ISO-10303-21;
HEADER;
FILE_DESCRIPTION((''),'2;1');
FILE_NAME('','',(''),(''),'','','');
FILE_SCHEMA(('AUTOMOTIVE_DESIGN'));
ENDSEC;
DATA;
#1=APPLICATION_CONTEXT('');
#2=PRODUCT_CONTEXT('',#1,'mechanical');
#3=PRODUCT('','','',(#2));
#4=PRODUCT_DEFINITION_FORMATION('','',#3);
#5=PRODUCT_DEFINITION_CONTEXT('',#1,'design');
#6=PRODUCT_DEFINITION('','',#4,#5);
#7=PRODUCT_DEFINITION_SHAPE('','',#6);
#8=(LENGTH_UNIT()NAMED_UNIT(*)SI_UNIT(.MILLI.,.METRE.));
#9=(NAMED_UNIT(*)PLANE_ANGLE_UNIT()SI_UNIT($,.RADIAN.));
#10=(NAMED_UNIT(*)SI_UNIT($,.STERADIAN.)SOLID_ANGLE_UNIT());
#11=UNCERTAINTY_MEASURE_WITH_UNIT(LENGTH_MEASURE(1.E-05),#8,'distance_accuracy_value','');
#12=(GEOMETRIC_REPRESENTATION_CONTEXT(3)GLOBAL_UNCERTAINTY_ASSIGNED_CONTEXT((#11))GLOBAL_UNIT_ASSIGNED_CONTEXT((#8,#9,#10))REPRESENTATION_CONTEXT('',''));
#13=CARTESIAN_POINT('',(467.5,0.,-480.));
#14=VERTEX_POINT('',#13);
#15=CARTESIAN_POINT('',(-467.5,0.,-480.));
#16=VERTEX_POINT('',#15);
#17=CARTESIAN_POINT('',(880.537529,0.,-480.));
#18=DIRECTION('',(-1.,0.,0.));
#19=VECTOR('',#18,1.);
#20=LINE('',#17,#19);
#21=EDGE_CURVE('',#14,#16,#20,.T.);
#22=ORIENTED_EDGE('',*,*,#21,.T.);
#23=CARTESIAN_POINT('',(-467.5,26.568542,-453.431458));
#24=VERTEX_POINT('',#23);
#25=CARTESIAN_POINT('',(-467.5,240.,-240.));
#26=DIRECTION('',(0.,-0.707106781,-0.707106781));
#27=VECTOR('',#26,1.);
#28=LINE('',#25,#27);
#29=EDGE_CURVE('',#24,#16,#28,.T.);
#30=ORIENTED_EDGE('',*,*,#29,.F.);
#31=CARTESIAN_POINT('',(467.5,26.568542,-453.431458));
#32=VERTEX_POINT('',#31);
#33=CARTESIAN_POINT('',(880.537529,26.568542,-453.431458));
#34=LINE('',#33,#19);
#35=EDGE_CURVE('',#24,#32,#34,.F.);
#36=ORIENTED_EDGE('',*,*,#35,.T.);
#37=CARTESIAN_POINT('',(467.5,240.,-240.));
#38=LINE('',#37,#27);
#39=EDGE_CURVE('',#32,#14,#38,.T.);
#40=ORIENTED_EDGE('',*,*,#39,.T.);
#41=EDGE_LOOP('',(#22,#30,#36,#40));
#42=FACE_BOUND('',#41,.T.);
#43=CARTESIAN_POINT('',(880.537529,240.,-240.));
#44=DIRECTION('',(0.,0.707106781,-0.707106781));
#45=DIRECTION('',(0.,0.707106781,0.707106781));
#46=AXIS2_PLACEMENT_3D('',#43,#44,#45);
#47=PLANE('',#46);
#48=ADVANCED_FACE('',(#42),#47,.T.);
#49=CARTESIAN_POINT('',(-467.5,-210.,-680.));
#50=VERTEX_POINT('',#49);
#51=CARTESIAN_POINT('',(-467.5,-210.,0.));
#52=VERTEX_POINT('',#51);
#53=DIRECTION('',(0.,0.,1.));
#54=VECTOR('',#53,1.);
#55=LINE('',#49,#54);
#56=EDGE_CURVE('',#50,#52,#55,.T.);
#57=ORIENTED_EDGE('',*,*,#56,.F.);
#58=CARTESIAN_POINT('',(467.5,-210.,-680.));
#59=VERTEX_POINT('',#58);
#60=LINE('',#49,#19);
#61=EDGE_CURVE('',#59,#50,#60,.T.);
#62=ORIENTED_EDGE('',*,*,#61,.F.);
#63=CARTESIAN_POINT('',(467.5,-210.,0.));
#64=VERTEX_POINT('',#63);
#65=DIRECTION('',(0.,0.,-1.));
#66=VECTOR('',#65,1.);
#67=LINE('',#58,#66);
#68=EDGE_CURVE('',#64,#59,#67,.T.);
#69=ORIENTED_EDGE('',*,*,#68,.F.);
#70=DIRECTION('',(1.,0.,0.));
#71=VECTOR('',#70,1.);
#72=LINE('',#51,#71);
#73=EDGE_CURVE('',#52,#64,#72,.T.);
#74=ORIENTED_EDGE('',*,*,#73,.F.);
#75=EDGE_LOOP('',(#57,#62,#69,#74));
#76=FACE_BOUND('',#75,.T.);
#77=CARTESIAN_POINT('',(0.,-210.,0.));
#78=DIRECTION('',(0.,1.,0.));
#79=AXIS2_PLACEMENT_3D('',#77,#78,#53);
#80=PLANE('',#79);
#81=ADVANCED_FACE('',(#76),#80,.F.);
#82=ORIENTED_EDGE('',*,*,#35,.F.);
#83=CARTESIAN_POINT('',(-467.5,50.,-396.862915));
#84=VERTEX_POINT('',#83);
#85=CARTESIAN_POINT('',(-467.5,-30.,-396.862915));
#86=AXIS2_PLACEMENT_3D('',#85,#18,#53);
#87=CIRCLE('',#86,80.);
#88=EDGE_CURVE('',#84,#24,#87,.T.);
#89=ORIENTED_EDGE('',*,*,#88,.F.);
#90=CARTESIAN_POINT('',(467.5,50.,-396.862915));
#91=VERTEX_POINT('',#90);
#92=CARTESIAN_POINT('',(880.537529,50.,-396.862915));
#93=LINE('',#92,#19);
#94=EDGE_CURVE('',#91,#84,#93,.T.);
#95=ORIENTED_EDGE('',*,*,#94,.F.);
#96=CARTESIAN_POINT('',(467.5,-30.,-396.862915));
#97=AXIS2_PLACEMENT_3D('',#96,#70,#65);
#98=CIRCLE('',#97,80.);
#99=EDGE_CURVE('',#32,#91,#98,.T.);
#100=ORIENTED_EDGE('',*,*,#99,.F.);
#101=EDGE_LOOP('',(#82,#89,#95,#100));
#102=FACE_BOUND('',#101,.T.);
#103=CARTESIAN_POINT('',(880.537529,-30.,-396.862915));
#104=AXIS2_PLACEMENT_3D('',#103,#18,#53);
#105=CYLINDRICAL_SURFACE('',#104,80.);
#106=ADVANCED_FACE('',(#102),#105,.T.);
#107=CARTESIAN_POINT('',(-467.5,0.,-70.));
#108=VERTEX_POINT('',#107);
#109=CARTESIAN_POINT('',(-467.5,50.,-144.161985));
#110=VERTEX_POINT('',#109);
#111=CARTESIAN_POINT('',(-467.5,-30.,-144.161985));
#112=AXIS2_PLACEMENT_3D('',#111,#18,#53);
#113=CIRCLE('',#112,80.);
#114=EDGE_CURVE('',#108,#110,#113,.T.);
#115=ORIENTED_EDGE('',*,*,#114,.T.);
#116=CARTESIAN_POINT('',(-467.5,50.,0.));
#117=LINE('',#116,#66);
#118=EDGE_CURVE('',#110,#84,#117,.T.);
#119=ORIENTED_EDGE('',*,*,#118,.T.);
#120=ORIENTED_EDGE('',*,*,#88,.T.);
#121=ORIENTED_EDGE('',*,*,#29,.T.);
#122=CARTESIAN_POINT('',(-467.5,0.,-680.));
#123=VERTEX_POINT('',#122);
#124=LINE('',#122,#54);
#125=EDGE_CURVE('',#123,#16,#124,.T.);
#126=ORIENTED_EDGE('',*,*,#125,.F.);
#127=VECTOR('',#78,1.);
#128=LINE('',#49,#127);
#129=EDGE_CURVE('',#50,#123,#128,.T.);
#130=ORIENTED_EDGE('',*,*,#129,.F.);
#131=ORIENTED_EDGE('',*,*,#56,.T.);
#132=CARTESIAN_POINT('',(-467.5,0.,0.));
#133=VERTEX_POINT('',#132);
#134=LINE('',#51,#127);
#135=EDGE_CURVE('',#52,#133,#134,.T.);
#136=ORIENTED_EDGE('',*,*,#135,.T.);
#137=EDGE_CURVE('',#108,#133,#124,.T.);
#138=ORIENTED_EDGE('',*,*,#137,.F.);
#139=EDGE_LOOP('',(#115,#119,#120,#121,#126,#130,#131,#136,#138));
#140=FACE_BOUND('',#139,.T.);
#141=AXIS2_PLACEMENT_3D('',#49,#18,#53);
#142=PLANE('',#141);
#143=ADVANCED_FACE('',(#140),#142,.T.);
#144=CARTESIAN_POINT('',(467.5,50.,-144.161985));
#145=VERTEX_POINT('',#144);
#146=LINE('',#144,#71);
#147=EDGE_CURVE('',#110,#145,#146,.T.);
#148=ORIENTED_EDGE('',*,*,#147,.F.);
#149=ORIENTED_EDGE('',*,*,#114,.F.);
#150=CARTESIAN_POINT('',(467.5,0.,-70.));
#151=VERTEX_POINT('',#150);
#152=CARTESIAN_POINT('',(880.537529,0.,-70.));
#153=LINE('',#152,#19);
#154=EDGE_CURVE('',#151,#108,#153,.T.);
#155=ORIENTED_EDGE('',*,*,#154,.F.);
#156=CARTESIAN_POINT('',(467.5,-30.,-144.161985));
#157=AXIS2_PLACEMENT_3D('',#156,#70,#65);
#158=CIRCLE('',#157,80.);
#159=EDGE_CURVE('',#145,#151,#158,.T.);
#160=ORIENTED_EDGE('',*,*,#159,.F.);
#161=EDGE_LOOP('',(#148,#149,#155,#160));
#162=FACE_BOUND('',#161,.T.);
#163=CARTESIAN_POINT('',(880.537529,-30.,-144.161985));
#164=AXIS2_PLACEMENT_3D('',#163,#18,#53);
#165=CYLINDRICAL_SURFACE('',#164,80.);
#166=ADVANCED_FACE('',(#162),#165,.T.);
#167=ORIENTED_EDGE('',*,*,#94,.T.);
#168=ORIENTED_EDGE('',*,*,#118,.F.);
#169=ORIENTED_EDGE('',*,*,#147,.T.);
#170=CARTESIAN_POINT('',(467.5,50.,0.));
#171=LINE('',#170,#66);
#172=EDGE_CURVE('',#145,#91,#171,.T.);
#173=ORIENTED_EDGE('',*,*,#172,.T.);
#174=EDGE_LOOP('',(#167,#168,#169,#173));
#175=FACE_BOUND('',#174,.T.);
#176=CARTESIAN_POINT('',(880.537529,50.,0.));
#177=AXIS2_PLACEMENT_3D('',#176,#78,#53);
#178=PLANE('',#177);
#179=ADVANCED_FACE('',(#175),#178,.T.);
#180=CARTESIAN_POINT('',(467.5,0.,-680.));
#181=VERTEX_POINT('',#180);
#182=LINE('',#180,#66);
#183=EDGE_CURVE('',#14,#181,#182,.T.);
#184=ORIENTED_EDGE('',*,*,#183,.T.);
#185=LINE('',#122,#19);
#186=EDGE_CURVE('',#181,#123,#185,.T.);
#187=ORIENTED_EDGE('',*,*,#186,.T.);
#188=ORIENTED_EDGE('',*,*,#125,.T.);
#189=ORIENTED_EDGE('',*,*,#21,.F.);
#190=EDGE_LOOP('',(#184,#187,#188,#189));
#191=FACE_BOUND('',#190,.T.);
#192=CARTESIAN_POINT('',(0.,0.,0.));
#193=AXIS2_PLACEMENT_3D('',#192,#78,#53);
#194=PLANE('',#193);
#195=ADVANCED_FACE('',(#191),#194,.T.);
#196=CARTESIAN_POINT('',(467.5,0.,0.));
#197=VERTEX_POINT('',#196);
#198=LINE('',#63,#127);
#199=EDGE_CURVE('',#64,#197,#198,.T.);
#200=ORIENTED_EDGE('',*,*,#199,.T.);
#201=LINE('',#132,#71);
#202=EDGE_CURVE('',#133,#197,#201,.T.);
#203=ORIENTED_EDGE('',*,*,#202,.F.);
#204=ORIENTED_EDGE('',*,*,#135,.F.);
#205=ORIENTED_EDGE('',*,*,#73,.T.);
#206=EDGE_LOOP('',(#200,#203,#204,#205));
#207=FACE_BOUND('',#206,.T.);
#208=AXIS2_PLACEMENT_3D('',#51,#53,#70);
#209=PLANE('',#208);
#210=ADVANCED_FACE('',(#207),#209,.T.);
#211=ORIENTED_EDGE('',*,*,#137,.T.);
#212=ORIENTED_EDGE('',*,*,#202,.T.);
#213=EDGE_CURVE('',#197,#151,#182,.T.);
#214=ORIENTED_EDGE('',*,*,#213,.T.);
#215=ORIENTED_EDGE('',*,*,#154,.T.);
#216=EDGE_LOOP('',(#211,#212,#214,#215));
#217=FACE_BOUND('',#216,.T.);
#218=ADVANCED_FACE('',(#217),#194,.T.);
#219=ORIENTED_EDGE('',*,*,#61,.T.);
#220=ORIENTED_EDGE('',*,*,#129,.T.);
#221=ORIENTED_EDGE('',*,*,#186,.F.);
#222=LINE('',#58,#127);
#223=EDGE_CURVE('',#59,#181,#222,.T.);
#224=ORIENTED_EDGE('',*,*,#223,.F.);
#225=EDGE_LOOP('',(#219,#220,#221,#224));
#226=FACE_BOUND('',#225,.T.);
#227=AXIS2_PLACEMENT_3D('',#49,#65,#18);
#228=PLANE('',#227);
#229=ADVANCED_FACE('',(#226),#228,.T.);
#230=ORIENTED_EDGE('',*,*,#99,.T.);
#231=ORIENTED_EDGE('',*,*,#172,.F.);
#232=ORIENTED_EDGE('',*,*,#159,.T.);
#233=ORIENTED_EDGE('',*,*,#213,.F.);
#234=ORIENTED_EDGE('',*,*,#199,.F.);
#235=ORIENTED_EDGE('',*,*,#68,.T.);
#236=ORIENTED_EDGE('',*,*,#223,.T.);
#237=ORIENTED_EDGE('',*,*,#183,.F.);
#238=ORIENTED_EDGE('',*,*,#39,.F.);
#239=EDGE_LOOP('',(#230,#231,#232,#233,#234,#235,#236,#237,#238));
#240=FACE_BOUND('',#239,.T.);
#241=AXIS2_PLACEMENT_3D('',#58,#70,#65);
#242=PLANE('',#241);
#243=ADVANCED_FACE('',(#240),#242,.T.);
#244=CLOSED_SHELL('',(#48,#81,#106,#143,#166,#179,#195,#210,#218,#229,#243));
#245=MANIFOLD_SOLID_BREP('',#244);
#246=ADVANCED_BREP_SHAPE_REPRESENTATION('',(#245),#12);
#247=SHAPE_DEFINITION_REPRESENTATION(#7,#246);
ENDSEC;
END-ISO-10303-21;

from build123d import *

# Parameters (mm, degrees)
SKETCH1_W           = 935
SKETCH1_H           = 680
BOSS_EXTRUDE1_DEPTH = 210
BOSS_EXTRUDE2_DEPTH = 935
FILLET1_R           = 80


with BuildPart() as part:
    # Sketch1 → Boss-Extrude1 (new body)
    with BuildSketch(Plane(origin=(0, 0, 0), x_dir=(1, 0, 0), z_dir=(0, 1, 0))):
        with Locations((0, 340)):
            Rectangle(SKETCH1_W, SKETCH1_H)
    extrude(amount=-BOSS_EXTRUDE1_DEPTH)

    # Sketch3 → Boss-Extrude2 (add)
    with BuildSketch(Plane.ZY.offset(467.5)):
        Polygon((-70, 0), (-70, 50), (-430, 50), (-480, 0), align=None)
    extrude(amount=-BOSS_EXTRUDE2_DEPTH)

    # Fillet1
    # the kernel refuses this fillet: 80 mm, written as the material it takes off along each edge
    with BuildSketch(Plane(origin=(-652.904962177, 50, -70), x_dir=(0, -1, 0), z_dir=(1, 0, 0))) as fillet1_piece_1:
        with BuildLine():
            CenterArc((80, 74.161984871), FILLET1_R, 180, 67.975687163)
            Line((0, 74.161984871), (-1.6, 74.161984871))
            Line((-1.6, 74.161984871), (-1.6, 0))
            Line((-1.6, 0), (0, -1.6))
            ThreePointArc((0, -1.6), (25, -1.6), (49.4, -1.483239697))
            Line((49.4, -1.483239697), (50, 0))
        make_face()
    extrude(amount=1305.809924355, mode=Mode.SUBTRACT)
    with BuildSketch(Plane(origin=(-550.342712475, 50, -430), x_dir=(0, -0.7071067811865477, -0.7071067811865474), z_dir=(1, 0, 0))) as fillet1_piece_2:
        with BuildLine():
            CenterArc((FILLET1_R * 0.414213562373, -FILLET1_R), FILLET1_R, 90, 45)
            Line((-FILLET1_R * 0.292893218813, -FILLET1_R * 0.292893218813), (-FILLET1_R * 0.307035354437, -FILLET1_R * 0.27875108319))
            Line((-FILLET1_R * 0.307035354437, -FILLET1_R * 0.27875108319), (-FILLET1_R * 0.00828427124746, FILLET1_R * 0.02))
            Line((-FILLET1_R * 0.00828427124746, FILLET1_R * 0.02), (FILLET1_R * 0.414213562373, FILLET1_R * 0.02))
            Line((FILLET1_R * 0.414213562373, FILLET1_R * 0.02), (FILLET1_R * 0.414213562373, 0))
        make_face()
    extrude(amount=1100.685424949, mode=Mode.SUBTRACT)


solid = part.part
